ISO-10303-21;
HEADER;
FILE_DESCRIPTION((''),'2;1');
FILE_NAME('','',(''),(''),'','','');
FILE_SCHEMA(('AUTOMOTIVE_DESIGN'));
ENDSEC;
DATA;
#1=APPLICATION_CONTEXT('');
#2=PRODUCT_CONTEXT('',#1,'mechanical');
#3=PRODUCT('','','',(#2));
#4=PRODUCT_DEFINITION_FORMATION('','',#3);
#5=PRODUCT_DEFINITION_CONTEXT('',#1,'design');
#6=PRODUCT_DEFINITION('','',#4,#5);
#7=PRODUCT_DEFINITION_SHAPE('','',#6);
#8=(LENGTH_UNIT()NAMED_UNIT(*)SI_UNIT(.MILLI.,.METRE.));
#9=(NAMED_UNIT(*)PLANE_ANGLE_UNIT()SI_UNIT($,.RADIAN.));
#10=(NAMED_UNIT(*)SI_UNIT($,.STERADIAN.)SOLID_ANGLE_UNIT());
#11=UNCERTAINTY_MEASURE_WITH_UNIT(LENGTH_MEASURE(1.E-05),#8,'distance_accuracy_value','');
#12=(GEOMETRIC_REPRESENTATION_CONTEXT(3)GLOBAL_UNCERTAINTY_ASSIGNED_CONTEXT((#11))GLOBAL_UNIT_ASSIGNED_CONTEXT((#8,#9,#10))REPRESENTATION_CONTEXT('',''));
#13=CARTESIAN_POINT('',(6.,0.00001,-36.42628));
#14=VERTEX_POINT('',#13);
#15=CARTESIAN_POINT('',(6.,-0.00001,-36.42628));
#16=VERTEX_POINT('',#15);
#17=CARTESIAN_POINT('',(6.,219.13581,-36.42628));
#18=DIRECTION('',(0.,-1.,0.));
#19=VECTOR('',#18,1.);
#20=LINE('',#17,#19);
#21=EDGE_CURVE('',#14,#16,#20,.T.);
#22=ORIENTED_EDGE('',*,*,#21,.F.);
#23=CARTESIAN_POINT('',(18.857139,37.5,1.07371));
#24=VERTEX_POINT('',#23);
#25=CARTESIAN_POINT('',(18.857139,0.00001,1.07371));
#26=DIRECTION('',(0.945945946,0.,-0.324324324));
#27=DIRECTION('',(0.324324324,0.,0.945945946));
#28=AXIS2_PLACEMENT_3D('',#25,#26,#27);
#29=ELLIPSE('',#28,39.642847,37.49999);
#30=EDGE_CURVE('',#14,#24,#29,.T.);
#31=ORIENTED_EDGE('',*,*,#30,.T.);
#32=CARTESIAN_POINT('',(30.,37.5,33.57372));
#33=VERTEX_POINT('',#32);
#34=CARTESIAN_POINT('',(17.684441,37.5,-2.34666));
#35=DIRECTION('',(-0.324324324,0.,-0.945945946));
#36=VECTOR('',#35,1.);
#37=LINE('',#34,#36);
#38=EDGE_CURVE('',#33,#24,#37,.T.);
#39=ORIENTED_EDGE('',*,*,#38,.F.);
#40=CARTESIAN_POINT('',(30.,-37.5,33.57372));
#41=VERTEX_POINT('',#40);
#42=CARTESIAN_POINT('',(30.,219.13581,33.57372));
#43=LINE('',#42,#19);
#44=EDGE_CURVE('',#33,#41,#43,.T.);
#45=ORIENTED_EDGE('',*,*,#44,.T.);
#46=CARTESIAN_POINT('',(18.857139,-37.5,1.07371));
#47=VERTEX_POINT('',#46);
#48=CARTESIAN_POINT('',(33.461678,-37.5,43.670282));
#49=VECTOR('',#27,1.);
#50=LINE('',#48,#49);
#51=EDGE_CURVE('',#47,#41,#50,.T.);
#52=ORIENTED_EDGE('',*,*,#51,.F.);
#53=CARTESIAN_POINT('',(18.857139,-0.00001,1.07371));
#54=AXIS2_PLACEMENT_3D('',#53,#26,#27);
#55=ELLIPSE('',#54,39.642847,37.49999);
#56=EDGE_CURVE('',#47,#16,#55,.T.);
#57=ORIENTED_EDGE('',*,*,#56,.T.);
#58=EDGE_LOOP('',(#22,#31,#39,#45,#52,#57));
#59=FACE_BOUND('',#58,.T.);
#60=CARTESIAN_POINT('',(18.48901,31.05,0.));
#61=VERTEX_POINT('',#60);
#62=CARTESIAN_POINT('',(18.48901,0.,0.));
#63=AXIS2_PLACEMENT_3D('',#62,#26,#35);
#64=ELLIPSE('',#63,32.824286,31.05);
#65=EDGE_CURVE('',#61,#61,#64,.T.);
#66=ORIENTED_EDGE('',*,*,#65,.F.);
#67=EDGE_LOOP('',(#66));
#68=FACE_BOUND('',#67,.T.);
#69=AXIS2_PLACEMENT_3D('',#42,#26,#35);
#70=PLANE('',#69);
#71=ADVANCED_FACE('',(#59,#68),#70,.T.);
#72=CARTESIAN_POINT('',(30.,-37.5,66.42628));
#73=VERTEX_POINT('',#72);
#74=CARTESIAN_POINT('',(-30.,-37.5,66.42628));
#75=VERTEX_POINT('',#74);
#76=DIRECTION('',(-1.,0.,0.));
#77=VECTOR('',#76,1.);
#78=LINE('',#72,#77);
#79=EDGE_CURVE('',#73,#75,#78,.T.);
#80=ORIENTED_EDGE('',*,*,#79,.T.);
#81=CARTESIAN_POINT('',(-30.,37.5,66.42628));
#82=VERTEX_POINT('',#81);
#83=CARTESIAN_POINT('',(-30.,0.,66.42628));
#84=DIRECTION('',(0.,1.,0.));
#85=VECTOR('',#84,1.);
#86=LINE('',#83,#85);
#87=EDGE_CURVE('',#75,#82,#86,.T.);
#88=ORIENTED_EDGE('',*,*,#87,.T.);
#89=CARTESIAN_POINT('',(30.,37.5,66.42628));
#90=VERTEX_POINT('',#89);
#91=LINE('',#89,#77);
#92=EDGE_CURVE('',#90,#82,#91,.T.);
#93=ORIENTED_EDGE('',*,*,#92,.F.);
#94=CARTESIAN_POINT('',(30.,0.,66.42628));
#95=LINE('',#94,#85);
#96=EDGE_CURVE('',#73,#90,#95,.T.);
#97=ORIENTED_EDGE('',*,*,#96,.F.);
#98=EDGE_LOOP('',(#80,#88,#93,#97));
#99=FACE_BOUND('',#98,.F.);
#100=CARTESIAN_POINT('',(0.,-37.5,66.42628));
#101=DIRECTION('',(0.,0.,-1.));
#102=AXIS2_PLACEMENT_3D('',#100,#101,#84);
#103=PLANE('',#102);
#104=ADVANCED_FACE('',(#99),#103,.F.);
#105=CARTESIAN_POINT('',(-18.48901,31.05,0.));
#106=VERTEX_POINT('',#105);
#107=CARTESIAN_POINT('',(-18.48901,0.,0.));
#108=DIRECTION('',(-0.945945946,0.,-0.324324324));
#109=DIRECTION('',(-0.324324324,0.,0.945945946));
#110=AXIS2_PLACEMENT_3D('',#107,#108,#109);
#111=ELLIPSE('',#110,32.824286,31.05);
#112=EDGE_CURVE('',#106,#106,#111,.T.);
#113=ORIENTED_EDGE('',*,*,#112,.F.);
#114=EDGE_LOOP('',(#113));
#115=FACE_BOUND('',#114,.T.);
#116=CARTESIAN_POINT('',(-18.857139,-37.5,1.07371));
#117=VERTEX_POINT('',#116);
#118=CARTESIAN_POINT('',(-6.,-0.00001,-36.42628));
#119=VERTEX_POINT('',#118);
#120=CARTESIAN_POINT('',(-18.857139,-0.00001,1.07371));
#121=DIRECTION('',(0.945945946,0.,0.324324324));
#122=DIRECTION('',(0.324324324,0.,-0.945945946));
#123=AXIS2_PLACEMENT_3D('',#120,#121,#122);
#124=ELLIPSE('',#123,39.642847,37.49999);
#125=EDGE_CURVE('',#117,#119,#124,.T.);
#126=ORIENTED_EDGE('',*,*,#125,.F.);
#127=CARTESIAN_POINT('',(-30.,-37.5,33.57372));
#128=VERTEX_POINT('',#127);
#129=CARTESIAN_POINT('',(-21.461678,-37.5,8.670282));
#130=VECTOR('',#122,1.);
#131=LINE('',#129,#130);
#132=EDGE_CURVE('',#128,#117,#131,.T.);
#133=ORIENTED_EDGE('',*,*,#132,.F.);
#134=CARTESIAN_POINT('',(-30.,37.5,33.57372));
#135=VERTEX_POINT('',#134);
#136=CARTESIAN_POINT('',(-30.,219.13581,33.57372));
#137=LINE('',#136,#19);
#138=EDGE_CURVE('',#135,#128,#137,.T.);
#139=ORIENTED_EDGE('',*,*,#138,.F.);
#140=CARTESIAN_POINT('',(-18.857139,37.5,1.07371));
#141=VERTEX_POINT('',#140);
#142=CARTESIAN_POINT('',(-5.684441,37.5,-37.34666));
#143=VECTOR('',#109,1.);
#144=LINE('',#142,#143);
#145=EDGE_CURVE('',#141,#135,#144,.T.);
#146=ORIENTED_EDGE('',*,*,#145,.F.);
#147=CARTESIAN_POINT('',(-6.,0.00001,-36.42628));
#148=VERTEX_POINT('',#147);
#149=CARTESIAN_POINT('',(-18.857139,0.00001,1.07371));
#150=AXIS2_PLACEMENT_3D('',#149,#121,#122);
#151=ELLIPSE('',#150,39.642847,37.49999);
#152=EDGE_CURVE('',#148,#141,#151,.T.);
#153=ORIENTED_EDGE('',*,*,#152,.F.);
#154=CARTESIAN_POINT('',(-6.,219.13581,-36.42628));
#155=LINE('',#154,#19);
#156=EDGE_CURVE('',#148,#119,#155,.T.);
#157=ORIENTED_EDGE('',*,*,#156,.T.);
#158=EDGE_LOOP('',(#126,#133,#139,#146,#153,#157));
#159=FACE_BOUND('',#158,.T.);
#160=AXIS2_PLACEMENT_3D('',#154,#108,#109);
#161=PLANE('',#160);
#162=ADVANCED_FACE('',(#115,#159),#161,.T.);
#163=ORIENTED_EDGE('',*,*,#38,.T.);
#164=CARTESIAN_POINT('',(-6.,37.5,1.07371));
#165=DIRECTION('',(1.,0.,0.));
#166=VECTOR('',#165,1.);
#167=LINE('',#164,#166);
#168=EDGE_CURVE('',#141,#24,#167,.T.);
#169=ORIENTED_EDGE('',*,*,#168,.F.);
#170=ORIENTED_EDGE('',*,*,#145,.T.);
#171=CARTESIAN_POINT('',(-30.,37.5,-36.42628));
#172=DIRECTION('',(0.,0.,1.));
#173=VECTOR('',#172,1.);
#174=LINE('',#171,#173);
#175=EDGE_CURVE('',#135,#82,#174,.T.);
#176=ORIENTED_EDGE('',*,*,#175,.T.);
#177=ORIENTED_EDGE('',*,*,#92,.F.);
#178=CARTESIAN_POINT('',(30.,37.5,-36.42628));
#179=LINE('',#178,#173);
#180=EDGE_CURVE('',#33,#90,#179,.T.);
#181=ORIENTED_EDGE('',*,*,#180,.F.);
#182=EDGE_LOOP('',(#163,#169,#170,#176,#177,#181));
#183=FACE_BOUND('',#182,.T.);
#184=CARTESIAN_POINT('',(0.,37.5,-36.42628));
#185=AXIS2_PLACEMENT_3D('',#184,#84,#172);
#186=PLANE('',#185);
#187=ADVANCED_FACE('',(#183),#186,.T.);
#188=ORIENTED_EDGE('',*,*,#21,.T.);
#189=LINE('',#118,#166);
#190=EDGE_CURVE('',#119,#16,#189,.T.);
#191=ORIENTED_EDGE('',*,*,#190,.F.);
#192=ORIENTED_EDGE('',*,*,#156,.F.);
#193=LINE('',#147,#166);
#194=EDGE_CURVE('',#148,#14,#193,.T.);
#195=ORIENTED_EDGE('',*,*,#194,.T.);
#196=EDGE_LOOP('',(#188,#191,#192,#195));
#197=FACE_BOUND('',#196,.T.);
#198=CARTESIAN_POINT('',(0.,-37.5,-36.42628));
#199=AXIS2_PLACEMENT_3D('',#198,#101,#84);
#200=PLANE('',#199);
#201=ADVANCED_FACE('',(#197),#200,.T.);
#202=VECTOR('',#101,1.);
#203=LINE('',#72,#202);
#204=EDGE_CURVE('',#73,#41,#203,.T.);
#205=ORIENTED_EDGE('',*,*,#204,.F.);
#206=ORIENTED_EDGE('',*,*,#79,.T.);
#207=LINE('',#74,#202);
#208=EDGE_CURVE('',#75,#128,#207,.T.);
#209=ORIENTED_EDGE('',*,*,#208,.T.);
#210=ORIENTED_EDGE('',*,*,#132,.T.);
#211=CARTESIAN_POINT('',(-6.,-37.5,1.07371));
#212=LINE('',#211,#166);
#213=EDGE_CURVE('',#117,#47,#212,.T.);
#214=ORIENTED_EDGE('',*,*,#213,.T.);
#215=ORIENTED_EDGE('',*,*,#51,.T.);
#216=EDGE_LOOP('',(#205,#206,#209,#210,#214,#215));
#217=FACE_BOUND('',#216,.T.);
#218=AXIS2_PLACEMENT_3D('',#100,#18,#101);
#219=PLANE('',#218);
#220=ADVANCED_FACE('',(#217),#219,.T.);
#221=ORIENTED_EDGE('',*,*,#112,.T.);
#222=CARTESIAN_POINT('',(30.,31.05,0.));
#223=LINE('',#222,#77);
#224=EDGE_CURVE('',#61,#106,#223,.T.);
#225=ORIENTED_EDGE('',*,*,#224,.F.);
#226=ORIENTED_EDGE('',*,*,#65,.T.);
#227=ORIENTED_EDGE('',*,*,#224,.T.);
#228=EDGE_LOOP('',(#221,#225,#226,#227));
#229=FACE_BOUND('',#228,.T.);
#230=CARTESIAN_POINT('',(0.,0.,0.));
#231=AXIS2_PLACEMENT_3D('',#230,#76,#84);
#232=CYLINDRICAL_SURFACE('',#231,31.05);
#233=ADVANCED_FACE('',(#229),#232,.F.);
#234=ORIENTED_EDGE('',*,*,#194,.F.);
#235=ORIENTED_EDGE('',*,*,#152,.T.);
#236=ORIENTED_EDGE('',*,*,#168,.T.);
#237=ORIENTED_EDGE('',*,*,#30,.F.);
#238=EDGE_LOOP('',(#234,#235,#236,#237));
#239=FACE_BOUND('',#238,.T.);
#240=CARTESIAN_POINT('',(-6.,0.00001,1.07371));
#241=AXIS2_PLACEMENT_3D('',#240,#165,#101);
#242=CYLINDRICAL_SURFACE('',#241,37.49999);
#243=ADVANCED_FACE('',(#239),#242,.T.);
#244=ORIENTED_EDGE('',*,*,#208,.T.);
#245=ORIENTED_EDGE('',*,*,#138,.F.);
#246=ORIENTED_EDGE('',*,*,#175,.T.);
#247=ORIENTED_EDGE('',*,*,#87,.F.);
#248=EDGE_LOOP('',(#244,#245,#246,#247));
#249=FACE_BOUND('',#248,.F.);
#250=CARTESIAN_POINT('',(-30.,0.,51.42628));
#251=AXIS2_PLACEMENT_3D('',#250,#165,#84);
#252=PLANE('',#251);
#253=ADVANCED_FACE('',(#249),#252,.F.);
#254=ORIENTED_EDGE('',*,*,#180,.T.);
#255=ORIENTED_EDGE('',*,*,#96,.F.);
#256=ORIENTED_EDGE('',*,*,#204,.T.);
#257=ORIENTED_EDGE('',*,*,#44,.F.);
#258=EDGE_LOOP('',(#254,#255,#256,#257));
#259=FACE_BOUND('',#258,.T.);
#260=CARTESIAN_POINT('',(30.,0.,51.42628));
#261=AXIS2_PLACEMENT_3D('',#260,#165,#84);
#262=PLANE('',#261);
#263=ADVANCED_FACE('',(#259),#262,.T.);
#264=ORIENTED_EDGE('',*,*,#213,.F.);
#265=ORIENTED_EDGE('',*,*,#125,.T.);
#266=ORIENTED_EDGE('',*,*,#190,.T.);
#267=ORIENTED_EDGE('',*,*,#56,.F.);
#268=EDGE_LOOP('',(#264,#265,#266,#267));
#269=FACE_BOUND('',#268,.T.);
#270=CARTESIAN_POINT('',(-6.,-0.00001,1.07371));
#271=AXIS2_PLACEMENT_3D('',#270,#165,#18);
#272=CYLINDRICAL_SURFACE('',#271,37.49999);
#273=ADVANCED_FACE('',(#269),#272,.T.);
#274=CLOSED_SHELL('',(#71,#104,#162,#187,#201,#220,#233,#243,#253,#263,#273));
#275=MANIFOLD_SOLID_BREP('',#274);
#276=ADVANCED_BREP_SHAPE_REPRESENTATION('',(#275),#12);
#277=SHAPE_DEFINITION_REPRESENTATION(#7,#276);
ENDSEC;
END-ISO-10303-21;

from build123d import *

# Parameters (mm, degrees)
F0_W        = 75
F0_H        = 30
F0_H_2      = 72.8525593877
F0_R        = 31.05
F1_DEPTH    = 30
F2_T1_DEPTH = 438.2716205132
F3_R        = 37.49999


# Not quite as in the source:
# - a fillet or chamfer that OpenCascade refuses, or shapes differently, is made with other operations: its cross-section is extruded or revolved along the edge and cut away or added
# - a fillet or chamfer is up to 0.001 mm smaller than in the source, because OpenCascade refuses the exact size


with BuildPart() as f1:
    # F0 (on Right) → F1 (new body, symmetric)
    with BuildSketch(Plane.YZ):
        with Locations((0, 51.4262796938)):
            Rectangle(F0_W, F0_H)
        Rectangle(F0_W, F0_H_2)
        Circle(F0_R, mode=Mode.SUBTRACT)
    extrude(amount=F1_DEPTH, both=True)

    # F2: chamfer of 70 x 24 on 2 edges, made by hand

    # F2_s2 → F2_t1 (cut)
    with BuildSketch(Plane.XZ.offset(-219.1358102566)):
        Polygon((30, 33.5737203062), (6, -36.4262796938), (30, -36.4262796938), align=None)
        Polygon((-6, -36.4262796938), (-30, 33.5737203062), (-30, -36.4262796938), align=None)
    extrude(amount=F2_T1_DEPTH, mode=Mode.SUBTRACT)

    # F3 (radius 37.5 in the source; OpenCascade refuses exactly that, so slightly less here)
    f3_edges = [f1.edges().sort_by_distance(p)[0] for p in [
        (0, -37.5, -36.42628),
        (0, 37.5, -36.42628),
    ]]
    fillet(f3_edges, radius=F3_R)


solid = f1.part
